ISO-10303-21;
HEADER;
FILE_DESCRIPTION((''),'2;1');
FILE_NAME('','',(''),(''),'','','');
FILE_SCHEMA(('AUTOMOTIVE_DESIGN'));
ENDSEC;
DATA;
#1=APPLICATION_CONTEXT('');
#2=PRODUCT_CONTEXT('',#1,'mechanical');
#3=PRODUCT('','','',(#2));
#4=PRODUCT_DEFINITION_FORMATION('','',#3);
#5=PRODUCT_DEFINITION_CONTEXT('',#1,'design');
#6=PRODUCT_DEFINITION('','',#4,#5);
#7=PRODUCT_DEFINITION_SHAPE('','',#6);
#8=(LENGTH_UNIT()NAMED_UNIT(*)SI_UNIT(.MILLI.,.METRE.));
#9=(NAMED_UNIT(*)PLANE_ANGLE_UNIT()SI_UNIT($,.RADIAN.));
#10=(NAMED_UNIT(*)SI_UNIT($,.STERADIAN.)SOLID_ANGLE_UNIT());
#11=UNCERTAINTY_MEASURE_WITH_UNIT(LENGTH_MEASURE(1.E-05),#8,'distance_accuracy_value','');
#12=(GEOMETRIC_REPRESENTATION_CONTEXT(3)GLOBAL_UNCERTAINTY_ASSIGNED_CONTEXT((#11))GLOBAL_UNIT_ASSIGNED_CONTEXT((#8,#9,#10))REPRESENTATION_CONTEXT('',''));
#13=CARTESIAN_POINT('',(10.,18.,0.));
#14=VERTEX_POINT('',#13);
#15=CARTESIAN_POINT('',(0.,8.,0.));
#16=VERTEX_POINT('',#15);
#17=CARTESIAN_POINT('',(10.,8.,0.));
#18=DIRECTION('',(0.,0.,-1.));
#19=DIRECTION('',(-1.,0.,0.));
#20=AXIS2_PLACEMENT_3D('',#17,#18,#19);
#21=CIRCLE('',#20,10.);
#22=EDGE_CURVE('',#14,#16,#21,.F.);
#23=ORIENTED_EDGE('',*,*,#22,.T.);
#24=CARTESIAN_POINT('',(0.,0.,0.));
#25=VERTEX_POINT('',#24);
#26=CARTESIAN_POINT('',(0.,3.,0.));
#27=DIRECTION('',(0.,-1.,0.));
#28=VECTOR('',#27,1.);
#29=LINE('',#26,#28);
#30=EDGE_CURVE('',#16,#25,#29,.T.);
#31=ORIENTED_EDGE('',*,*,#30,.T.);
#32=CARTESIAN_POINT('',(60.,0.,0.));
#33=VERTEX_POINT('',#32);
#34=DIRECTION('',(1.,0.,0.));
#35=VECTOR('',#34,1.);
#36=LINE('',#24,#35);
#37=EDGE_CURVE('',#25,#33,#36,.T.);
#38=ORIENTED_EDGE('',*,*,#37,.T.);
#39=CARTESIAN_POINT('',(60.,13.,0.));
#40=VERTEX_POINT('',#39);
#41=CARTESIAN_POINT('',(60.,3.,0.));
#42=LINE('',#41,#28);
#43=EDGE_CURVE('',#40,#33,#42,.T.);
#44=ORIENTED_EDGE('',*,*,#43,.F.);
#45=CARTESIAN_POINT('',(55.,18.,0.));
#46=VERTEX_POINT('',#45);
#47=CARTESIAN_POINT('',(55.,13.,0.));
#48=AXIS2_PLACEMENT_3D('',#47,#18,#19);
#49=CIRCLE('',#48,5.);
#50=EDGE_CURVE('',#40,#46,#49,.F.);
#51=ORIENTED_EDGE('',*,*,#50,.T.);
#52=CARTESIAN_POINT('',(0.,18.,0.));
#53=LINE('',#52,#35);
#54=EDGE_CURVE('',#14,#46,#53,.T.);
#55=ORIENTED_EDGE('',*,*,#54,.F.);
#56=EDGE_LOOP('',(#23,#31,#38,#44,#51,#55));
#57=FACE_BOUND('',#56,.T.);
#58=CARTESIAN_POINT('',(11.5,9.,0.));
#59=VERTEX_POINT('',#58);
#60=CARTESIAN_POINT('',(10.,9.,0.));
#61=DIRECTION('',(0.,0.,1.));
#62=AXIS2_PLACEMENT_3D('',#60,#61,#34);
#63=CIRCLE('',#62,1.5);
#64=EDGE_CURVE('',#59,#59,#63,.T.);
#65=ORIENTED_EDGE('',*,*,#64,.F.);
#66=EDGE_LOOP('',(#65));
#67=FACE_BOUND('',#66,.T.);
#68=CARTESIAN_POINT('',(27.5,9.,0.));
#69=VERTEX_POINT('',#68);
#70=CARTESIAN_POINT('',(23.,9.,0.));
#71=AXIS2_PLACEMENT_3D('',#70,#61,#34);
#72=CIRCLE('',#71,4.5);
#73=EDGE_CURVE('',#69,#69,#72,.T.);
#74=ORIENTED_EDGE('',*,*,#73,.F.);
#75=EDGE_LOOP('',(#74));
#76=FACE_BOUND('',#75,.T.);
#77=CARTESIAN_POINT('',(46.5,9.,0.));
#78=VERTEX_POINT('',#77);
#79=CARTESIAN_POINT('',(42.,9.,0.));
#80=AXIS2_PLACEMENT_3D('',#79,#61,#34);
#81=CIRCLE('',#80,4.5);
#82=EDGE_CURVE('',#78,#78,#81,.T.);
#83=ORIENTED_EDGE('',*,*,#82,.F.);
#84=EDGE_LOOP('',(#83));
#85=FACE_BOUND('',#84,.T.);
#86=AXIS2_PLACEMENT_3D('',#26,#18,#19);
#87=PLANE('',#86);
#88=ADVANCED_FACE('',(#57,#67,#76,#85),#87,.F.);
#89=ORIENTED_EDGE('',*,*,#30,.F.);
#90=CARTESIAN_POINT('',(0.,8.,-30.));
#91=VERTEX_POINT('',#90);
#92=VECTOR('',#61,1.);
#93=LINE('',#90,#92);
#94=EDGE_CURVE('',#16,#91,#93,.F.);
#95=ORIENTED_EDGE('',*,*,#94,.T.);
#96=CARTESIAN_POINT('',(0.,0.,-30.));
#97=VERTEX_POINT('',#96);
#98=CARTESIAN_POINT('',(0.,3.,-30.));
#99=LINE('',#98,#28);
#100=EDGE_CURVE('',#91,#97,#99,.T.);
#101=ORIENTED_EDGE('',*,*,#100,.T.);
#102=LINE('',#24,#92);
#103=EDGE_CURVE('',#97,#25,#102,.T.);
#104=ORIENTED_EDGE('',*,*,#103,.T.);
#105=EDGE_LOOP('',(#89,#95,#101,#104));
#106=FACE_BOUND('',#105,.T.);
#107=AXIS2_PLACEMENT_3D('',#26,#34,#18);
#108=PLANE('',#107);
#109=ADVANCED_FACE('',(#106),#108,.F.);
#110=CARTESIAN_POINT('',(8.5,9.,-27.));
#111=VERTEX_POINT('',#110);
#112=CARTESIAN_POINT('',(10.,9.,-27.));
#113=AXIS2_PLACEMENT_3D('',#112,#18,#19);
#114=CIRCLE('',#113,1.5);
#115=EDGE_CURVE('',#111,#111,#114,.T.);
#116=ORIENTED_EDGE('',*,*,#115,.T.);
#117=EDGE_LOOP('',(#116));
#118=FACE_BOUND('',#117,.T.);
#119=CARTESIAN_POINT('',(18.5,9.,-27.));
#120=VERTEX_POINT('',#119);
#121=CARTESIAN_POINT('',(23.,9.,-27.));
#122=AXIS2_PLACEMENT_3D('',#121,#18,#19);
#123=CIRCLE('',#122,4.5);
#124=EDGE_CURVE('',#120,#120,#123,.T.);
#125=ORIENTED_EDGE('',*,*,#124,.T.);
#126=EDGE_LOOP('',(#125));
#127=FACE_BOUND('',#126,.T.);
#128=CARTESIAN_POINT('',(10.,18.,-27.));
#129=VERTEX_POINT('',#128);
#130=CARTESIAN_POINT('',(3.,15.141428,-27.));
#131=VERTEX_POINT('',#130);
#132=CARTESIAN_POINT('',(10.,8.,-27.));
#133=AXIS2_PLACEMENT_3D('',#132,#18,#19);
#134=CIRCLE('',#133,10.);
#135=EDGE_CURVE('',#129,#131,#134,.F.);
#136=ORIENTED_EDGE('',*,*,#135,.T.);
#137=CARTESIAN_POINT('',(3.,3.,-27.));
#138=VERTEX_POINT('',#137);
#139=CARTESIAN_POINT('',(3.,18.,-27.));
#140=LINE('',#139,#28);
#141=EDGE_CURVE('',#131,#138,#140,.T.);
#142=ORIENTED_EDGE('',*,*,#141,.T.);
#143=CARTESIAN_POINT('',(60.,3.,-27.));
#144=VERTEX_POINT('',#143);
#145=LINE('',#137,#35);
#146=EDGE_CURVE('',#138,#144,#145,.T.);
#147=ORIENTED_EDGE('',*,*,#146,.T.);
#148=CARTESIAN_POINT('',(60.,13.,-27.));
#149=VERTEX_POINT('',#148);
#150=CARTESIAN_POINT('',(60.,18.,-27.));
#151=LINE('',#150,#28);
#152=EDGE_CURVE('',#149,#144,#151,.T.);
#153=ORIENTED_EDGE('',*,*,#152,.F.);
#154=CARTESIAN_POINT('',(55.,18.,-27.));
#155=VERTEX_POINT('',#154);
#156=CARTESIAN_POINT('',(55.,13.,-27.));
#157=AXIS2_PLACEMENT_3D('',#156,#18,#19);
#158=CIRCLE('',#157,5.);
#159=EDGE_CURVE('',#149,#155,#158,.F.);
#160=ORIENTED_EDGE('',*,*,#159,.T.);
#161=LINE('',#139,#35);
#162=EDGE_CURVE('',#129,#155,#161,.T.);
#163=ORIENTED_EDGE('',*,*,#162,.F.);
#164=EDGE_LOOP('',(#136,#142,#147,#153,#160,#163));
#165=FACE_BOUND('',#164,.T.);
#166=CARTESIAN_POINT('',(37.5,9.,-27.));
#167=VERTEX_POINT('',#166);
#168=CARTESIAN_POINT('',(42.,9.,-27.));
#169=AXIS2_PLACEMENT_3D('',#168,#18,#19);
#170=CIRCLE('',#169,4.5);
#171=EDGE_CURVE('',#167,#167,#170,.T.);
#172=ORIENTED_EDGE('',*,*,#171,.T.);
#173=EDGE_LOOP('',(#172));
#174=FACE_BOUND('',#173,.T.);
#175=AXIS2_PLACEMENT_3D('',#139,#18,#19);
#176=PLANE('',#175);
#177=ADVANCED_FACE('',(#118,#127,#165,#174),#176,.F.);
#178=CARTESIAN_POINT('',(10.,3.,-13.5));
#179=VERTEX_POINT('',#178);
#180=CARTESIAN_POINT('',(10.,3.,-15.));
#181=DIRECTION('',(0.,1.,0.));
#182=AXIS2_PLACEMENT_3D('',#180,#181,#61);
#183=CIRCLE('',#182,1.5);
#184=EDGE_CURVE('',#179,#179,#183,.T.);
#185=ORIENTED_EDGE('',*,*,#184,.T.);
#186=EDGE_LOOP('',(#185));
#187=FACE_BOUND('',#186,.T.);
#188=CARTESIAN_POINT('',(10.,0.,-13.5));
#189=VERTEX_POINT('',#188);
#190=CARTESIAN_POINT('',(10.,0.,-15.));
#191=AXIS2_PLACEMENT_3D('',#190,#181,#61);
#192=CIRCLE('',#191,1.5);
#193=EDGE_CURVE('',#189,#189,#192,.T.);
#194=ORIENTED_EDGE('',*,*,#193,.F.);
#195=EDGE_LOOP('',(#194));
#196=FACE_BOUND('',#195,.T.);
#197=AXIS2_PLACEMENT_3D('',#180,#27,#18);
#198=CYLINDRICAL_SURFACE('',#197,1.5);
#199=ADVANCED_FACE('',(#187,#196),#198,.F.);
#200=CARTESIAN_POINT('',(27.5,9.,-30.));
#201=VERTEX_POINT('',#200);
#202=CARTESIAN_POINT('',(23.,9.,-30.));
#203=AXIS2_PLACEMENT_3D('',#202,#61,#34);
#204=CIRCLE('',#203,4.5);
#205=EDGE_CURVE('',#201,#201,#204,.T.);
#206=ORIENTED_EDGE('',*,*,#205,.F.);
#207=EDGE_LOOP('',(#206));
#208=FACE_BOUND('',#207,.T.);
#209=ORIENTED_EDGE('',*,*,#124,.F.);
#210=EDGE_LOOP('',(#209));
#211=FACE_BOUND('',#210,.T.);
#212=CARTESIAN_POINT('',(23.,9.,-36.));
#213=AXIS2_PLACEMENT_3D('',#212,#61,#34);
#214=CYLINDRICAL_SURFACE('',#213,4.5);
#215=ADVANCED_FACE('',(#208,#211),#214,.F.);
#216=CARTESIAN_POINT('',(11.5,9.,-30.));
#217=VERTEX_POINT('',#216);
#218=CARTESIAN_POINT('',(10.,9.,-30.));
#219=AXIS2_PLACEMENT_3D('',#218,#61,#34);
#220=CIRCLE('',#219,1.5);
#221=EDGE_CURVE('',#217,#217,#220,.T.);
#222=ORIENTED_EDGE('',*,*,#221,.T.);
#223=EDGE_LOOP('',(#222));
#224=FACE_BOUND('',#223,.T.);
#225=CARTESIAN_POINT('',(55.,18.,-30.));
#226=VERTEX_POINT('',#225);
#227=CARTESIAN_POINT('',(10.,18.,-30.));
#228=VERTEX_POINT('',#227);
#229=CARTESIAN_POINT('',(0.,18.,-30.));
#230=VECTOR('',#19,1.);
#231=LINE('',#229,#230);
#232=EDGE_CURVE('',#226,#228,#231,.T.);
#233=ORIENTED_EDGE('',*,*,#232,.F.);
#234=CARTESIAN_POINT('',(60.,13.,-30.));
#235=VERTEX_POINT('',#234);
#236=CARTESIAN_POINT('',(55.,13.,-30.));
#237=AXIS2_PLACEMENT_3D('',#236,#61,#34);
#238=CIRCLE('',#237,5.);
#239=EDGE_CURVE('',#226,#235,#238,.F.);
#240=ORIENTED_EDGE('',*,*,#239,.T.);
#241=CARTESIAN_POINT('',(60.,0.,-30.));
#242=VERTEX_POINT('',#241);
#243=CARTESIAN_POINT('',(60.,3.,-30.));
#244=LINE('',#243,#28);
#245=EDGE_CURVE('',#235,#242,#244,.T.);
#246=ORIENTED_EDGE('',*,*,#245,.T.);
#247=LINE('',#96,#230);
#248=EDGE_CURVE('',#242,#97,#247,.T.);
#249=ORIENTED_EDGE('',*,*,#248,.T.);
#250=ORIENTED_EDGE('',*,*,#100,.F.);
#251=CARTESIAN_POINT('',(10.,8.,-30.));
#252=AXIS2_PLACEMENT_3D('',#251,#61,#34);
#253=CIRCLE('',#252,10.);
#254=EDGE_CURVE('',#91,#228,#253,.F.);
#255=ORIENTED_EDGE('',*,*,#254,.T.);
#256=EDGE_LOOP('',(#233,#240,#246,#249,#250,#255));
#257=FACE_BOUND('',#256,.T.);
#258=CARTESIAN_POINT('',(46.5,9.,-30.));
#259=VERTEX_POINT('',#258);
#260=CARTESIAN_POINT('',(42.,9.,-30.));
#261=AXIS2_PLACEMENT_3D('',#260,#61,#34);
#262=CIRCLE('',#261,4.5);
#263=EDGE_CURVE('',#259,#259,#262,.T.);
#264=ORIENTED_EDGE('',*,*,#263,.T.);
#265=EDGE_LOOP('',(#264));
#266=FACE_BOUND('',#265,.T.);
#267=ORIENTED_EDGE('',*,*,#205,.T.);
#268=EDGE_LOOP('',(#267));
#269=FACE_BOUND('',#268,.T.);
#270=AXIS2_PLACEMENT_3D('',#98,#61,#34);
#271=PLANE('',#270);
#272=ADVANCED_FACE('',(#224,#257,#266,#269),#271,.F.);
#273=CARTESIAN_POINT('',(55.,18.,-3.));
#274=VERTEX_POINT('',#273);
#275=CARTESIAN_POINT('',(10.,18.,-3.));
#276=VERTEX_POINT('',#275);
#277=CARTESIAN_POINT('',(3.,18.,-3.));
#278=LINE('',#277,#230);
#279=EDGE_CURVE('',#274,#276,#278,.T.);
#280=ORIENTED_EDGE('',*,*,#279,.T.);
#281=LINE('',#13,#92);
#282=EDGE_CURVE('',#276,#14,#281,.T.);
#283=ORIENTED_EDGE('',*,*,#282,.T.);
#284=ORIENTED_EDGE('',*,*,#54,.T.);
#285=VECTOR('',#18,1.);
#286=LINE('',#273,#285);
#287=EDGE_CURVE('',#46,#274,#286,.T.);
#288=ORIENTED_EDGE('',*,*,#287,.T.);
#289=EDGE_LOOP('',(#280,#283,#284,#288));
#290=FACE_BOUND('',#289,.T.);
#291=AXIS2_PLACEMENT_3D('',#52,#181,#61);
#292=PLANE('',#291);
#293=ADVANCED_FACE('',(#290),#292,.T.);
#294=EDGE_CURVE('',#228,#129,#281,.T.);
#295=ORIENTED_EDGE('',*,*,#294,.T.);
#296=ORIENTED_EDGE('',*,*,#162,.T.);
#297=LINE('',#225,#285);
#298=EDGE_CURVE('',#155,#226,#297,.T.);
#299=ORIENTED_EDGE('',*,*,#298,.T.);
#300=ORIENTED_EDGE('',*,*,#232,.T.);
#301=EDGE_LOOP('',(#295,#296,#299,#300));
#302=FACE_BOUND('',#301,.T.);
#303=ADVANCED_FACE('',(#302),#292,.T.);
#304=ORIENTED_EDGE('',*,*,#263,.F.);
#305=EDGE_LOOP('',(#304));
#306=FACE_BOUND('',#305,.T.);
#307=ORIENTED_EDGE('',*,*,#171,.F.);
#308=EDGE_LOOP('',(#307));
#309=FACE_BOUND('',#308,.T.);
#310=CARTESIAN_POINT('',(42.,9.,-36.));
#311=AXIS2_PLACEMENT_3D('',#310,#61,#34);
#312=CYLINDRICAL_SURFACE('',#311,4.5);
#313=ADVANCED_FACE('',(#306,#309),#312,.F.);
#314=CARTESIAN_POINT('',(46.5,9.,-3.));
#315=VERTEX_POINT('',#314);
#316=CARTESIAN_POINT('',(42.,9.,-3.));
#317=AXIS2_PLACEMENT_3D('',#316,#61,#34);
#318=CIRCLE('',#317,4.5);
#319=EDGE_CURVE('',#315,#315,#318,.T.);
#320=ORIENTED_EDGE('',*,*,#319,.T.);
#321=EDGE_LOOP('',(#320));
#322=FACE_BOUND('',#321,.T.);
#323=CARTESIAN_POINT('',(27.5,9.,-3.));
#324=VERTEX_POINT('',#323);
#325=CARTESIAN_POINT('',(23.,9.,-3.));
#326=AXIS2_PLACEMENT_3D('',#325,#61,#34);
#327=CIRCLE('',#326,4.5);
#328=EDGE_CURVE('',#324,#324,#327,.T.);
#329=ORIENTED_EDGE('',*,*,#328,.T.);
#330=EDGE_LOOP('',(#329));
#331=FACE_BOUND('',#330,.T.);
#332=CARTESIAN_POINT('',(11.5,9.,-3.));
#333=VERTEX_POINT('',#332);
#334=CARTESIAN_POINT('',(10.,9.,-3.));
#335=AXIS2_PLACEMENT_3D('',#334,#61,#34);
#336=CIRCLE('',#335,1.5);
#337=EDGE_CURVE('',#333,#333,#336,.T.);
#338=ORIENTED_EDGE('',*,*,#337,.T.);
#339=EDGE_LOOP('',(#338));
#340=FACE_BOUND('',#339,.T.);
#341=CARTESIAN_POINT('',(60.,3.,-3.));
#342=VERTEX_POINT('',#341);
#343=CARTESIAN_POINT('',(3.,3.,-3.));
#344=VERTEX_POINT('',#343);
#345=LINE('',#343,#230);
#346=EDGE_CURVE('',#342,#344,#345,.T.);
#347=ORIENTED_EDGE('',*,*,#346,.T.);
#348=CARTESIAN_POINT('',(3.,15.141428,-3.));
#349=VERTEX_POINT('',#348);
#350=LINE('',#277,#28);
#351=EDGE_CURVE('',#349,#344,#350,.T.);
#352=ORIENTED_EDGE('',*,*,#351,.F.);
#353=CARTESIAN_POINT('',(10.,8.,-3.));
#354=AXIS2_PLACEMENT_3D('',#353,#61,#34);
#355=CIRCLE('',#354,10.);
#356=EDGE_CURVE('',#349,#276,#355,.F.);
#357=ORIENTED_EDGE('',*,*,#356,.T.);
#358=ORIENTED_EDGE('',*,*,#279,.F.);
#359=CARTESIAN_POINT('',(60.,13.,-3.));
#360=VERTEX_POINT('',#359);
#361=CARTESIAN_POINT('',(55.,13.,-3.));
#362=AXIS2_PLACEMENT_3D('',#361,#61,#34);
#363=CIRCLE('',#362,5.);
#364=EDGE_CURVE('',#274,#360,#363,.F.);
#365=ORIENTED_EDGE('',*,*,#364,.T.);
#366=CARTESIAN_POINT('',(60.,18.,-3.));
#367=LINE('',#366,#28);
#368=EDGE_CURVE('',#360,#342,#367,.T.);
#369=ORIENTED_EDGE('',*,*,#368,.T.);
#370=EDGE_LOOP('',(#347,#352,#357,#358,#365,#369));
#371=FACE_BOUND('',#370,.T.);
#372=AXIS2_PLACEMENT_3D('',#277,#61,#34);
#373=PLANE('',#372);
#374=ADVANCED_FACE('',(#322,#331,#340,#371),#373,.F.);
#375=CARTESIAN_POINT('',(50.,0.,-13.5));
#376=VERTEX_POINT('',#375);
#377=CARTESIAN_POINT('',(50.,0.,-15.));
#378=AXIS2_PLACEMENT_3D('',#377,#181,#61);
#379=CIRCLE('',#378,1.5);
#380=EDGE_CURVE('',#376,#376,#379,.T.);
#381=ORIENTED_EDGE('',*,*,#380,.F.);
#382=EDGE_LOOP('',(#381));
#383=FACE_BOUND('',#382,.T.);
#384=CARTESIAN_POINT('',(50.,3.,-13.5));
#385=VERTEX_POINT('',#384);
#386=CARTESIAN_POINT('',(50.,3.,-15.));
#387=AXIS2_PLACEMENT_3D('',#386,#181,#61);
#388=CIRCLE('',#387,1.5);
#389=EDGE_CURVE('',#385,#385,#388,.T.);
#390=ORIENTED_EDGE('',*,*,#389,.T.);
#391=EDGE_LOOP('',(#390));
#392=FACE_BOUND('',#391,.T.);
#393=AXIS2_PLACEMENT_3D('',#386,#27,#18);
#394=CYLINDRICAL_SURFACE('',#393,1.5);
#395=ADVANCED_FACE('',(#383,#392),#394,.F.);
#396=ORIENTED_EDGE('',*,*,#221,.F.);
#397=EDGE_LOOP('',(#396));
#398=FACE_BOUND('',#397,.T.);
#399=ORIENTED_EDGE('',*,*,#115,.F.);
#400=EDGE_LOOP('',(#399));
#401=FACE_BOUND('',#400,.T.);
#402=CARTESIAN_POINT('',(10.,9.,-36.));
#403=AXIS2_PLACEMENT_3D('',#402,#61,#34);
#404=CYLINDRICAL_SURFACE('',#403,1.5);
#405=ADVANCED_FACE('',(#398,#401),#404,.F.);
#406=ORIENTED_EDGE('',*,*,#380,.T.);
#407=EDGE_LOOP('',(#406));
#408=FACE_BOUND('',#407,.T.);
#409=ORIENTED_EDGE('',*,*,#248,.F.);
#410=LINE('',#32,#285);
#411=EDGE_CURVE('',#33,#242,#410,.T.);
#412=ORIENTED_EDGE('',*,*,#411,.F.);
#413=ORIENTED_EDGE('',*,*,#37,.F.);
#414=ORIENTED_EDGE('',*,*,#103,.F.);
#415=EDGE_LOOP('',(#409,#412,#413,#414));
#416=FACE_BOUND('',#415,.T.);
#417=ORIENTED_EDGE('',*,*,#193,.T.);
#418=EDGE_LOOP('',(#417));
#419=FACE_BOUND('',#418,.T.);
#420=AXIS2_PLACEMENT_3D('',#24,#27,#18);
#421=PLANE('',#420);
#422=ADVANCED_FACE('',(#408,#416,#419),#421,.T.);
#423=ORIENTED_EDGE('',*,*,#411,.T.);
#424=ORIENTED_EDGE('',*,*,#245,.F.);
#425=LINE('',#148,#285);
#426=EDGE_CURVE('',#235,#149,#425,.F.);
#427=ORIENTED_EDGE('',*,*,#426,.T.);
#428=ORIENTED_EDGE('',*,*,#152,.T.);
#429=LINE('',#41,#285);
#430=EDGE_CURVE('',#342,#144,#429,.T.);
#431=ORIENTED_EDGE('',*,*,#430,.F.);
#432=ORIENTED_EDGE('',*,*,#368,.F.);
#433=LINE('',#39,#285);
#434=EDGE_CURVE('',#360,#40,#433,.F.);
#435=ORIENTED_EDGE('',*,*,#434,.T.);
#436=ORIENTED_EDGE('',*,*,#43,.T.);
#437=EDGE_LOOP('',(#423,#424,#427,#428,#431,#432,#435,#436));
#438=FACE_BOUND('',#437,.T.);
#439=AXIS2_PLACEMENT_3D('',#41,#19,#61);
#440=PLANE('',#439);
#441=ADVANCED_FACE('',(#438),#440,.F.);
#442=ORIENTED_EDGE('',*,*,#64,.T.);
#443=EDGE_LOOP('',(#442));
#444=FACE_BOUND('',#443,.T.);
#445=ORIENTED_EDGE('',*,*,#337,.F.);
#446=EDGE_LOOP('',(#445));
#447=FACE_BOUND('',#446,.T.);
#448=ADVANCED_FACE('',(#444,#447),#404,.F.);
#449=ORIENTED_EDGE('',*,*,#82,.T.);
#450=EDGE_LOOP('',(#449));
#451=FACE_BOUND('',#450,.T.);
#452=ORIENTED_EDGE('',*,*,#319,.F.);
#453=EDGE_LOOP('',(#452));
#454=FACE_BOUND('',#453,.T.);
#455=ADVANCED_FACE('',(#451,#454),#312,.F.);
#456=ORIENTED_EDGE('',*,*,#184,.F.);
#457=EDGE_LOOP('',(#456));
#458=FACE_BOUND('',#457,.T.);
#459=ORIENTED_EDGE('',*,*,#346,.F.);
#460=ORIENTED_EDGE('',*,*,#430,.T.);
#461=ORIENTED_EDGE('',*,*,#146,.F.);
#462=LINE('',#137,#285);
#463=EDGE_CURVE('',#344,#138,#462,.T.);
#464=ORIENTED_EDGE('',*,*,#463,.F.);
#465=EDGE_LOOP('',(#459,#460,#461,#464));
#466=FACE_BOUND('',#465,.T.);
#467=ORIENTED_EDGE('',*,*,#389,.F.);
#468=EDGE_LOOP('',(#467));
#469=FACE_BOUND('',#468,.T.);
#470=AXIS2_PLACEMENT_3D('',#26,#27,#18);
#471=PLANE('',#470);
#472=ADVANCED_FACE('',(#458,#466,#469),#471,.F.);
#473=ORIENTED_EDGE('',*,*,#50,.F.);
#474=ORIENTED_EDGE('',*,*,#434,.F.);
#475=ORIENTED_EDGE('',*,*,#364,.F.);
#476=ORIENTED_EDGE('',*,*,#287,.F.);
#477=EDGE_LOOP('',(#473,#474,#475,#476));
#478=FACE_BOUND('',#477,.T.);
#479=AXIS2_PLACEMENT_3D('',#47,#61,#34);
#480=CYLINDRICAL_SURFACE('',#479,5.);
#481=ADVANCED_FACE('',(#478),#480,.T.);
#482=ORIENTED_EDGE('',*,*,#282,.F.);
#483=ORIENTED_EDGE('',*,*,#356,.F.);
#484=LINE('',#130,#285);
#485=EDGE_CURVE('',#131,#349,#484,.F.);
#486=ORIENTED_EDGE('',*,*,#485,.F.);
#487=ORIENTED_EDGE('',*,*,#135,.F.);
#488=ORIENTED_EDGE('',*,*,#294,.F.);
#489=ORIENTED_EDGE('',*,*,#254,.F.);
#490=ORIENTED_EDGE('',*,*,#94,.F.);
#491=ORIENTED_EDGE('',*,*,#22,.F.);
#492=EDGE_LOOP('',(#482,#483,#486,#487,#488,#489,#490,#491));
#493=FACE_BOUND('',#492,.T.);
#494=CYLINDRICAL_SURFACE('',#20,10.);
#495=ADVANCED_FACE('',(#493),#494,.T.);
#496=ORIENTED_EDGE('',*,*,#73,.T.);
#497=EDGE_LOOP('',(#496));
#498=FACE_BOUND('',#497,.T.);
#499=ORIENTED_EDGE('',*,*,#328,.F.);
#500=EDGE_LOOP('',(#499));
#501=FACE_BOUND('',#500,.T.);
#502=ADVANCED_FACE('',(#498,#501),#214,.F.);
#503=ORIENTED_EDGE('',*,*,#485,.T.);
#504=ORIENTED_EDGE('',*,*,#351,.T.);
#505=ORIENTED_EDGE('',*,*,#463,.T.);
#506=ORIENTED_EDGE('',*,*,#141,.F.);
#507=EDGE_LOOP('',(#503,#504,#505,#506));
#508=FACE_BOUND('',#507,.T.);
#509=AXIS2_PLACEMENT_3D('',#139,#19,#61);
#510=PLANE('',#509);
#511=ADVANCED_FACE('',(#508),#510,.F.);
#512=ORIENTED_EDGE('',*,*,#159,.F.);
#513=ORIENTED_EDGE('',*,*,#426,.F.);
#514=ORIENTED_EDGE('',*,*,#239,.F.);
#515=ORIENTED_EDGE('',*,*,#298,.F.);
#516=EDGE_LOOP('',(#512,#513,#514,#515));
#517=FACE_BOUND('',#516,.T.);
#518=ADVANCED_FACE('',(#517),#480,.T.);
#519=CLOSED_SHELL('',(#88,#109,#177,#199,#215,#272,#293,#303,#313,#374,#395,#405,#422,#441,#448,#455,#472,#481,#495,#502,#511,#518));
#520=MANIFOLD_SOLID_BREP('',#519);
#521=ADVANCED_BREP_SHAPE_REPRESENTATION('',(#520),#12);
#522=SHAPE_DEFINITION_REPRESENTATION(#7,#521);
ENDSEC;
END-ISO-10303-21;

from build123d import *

# Parameters (mm, degrees)
CROQUIS1_W              = 60
CROQUIS1_H              = 30
CROQUIS1_R              = 1.5
SALIENTE_EXTRUIR1_DEPTH = 3
SALIENTE_EXTRUIR2_DEPTH = 15
REDONDEO1_R             = 10
REDONDEO2_R             = 5
CROQUIS3_R              = 4.5
CROQUIS3_R_2            = 1.5
CORTAR_EXTRUIR1_DEPTH   = 36


with BuildPart() as part:
    # Croquis1 → Saliente-Extruir1 (new body)
    with BuildSketch(Plane(origin=(0, 0, 0), x_dir=(1, 0, 0), z_dir=(0, 1, 0))):
        with Locations((30, 15)):
            Rectangle(CROQUIS1_W, CROQUIS1_H)
        with Locations(Location((10, 15, 0), (0, 0, 270))):
            Circle(CROQUIS1_R, mode=Mode.SUBTRACT)
        with Locations(Location((50, 15, 0), (0, 0, 270))):
            Circle(CROQUIS1_R, mode=Mode.SUBTRACT)
    extrude(amount=SALIENTE_EXTRUIR1_DEPTH)

    # Croquis2 → Saliente-Extruir2 (add)
    with BuildSketch(Plane(origin=(0, 3, 0), x_dir=(1, 0, 0), z_dir=(0, 1, 0))):
        Polygon((0, 30), (60, 30), (60, 27), (3, 27), (3, 3), (60, 3), (60, 0), (0, 0), align=None)
    extrude(amount=SALIENTE_EXTRUIR2_DEPTH)

    # Redondeo1
    # the kernel refuses this fillet: 10 mm, written as the material it takes off along each edge
    with BuildSketch(Plane(origin=(0, 18, 25), x_dir=(1, 0, 0), z_dir=(0, 0, -1))) as redondeo1_piece_1:
        with BuildLine():
            CenterArc((REDONDEO1_R, REDONDEO1_R), REDONDEO1_R, 180, 90)
            Line((0, REDONDEO1_R), (0, 0))
            Line((0, 0), (REDONDEO1_R, 0))
        make_face()
    extrude(amount=80, mode=Mode.SUBTRACT)

    # Redondeo2
    redondeo2_edges = [part.edges().sort_by_distance(p)[0] for p in [
        (60, 18, -1.5),
        (60, 18, -28.5),
    ]]
    fillet(redondeo2_edges, radius=REDONDEO2_R)

    # Croquis3 → Cortar-Extruir1 (cut)
    with BuildSketch(Plane.XY):
        with Locations((42, 9)):
            Circle(CROQUIS3_R)
        with Locations((23, 9)):
            Circle(CROQUIS3_R)
        with Locations((10, 9)):
            Circle(CROQUIS3_R_2)
    extrude(amount=-CORTAR_EXTRUIR1_DEPTH, mode=Mode.SUBTRACT)


solid = part.part
